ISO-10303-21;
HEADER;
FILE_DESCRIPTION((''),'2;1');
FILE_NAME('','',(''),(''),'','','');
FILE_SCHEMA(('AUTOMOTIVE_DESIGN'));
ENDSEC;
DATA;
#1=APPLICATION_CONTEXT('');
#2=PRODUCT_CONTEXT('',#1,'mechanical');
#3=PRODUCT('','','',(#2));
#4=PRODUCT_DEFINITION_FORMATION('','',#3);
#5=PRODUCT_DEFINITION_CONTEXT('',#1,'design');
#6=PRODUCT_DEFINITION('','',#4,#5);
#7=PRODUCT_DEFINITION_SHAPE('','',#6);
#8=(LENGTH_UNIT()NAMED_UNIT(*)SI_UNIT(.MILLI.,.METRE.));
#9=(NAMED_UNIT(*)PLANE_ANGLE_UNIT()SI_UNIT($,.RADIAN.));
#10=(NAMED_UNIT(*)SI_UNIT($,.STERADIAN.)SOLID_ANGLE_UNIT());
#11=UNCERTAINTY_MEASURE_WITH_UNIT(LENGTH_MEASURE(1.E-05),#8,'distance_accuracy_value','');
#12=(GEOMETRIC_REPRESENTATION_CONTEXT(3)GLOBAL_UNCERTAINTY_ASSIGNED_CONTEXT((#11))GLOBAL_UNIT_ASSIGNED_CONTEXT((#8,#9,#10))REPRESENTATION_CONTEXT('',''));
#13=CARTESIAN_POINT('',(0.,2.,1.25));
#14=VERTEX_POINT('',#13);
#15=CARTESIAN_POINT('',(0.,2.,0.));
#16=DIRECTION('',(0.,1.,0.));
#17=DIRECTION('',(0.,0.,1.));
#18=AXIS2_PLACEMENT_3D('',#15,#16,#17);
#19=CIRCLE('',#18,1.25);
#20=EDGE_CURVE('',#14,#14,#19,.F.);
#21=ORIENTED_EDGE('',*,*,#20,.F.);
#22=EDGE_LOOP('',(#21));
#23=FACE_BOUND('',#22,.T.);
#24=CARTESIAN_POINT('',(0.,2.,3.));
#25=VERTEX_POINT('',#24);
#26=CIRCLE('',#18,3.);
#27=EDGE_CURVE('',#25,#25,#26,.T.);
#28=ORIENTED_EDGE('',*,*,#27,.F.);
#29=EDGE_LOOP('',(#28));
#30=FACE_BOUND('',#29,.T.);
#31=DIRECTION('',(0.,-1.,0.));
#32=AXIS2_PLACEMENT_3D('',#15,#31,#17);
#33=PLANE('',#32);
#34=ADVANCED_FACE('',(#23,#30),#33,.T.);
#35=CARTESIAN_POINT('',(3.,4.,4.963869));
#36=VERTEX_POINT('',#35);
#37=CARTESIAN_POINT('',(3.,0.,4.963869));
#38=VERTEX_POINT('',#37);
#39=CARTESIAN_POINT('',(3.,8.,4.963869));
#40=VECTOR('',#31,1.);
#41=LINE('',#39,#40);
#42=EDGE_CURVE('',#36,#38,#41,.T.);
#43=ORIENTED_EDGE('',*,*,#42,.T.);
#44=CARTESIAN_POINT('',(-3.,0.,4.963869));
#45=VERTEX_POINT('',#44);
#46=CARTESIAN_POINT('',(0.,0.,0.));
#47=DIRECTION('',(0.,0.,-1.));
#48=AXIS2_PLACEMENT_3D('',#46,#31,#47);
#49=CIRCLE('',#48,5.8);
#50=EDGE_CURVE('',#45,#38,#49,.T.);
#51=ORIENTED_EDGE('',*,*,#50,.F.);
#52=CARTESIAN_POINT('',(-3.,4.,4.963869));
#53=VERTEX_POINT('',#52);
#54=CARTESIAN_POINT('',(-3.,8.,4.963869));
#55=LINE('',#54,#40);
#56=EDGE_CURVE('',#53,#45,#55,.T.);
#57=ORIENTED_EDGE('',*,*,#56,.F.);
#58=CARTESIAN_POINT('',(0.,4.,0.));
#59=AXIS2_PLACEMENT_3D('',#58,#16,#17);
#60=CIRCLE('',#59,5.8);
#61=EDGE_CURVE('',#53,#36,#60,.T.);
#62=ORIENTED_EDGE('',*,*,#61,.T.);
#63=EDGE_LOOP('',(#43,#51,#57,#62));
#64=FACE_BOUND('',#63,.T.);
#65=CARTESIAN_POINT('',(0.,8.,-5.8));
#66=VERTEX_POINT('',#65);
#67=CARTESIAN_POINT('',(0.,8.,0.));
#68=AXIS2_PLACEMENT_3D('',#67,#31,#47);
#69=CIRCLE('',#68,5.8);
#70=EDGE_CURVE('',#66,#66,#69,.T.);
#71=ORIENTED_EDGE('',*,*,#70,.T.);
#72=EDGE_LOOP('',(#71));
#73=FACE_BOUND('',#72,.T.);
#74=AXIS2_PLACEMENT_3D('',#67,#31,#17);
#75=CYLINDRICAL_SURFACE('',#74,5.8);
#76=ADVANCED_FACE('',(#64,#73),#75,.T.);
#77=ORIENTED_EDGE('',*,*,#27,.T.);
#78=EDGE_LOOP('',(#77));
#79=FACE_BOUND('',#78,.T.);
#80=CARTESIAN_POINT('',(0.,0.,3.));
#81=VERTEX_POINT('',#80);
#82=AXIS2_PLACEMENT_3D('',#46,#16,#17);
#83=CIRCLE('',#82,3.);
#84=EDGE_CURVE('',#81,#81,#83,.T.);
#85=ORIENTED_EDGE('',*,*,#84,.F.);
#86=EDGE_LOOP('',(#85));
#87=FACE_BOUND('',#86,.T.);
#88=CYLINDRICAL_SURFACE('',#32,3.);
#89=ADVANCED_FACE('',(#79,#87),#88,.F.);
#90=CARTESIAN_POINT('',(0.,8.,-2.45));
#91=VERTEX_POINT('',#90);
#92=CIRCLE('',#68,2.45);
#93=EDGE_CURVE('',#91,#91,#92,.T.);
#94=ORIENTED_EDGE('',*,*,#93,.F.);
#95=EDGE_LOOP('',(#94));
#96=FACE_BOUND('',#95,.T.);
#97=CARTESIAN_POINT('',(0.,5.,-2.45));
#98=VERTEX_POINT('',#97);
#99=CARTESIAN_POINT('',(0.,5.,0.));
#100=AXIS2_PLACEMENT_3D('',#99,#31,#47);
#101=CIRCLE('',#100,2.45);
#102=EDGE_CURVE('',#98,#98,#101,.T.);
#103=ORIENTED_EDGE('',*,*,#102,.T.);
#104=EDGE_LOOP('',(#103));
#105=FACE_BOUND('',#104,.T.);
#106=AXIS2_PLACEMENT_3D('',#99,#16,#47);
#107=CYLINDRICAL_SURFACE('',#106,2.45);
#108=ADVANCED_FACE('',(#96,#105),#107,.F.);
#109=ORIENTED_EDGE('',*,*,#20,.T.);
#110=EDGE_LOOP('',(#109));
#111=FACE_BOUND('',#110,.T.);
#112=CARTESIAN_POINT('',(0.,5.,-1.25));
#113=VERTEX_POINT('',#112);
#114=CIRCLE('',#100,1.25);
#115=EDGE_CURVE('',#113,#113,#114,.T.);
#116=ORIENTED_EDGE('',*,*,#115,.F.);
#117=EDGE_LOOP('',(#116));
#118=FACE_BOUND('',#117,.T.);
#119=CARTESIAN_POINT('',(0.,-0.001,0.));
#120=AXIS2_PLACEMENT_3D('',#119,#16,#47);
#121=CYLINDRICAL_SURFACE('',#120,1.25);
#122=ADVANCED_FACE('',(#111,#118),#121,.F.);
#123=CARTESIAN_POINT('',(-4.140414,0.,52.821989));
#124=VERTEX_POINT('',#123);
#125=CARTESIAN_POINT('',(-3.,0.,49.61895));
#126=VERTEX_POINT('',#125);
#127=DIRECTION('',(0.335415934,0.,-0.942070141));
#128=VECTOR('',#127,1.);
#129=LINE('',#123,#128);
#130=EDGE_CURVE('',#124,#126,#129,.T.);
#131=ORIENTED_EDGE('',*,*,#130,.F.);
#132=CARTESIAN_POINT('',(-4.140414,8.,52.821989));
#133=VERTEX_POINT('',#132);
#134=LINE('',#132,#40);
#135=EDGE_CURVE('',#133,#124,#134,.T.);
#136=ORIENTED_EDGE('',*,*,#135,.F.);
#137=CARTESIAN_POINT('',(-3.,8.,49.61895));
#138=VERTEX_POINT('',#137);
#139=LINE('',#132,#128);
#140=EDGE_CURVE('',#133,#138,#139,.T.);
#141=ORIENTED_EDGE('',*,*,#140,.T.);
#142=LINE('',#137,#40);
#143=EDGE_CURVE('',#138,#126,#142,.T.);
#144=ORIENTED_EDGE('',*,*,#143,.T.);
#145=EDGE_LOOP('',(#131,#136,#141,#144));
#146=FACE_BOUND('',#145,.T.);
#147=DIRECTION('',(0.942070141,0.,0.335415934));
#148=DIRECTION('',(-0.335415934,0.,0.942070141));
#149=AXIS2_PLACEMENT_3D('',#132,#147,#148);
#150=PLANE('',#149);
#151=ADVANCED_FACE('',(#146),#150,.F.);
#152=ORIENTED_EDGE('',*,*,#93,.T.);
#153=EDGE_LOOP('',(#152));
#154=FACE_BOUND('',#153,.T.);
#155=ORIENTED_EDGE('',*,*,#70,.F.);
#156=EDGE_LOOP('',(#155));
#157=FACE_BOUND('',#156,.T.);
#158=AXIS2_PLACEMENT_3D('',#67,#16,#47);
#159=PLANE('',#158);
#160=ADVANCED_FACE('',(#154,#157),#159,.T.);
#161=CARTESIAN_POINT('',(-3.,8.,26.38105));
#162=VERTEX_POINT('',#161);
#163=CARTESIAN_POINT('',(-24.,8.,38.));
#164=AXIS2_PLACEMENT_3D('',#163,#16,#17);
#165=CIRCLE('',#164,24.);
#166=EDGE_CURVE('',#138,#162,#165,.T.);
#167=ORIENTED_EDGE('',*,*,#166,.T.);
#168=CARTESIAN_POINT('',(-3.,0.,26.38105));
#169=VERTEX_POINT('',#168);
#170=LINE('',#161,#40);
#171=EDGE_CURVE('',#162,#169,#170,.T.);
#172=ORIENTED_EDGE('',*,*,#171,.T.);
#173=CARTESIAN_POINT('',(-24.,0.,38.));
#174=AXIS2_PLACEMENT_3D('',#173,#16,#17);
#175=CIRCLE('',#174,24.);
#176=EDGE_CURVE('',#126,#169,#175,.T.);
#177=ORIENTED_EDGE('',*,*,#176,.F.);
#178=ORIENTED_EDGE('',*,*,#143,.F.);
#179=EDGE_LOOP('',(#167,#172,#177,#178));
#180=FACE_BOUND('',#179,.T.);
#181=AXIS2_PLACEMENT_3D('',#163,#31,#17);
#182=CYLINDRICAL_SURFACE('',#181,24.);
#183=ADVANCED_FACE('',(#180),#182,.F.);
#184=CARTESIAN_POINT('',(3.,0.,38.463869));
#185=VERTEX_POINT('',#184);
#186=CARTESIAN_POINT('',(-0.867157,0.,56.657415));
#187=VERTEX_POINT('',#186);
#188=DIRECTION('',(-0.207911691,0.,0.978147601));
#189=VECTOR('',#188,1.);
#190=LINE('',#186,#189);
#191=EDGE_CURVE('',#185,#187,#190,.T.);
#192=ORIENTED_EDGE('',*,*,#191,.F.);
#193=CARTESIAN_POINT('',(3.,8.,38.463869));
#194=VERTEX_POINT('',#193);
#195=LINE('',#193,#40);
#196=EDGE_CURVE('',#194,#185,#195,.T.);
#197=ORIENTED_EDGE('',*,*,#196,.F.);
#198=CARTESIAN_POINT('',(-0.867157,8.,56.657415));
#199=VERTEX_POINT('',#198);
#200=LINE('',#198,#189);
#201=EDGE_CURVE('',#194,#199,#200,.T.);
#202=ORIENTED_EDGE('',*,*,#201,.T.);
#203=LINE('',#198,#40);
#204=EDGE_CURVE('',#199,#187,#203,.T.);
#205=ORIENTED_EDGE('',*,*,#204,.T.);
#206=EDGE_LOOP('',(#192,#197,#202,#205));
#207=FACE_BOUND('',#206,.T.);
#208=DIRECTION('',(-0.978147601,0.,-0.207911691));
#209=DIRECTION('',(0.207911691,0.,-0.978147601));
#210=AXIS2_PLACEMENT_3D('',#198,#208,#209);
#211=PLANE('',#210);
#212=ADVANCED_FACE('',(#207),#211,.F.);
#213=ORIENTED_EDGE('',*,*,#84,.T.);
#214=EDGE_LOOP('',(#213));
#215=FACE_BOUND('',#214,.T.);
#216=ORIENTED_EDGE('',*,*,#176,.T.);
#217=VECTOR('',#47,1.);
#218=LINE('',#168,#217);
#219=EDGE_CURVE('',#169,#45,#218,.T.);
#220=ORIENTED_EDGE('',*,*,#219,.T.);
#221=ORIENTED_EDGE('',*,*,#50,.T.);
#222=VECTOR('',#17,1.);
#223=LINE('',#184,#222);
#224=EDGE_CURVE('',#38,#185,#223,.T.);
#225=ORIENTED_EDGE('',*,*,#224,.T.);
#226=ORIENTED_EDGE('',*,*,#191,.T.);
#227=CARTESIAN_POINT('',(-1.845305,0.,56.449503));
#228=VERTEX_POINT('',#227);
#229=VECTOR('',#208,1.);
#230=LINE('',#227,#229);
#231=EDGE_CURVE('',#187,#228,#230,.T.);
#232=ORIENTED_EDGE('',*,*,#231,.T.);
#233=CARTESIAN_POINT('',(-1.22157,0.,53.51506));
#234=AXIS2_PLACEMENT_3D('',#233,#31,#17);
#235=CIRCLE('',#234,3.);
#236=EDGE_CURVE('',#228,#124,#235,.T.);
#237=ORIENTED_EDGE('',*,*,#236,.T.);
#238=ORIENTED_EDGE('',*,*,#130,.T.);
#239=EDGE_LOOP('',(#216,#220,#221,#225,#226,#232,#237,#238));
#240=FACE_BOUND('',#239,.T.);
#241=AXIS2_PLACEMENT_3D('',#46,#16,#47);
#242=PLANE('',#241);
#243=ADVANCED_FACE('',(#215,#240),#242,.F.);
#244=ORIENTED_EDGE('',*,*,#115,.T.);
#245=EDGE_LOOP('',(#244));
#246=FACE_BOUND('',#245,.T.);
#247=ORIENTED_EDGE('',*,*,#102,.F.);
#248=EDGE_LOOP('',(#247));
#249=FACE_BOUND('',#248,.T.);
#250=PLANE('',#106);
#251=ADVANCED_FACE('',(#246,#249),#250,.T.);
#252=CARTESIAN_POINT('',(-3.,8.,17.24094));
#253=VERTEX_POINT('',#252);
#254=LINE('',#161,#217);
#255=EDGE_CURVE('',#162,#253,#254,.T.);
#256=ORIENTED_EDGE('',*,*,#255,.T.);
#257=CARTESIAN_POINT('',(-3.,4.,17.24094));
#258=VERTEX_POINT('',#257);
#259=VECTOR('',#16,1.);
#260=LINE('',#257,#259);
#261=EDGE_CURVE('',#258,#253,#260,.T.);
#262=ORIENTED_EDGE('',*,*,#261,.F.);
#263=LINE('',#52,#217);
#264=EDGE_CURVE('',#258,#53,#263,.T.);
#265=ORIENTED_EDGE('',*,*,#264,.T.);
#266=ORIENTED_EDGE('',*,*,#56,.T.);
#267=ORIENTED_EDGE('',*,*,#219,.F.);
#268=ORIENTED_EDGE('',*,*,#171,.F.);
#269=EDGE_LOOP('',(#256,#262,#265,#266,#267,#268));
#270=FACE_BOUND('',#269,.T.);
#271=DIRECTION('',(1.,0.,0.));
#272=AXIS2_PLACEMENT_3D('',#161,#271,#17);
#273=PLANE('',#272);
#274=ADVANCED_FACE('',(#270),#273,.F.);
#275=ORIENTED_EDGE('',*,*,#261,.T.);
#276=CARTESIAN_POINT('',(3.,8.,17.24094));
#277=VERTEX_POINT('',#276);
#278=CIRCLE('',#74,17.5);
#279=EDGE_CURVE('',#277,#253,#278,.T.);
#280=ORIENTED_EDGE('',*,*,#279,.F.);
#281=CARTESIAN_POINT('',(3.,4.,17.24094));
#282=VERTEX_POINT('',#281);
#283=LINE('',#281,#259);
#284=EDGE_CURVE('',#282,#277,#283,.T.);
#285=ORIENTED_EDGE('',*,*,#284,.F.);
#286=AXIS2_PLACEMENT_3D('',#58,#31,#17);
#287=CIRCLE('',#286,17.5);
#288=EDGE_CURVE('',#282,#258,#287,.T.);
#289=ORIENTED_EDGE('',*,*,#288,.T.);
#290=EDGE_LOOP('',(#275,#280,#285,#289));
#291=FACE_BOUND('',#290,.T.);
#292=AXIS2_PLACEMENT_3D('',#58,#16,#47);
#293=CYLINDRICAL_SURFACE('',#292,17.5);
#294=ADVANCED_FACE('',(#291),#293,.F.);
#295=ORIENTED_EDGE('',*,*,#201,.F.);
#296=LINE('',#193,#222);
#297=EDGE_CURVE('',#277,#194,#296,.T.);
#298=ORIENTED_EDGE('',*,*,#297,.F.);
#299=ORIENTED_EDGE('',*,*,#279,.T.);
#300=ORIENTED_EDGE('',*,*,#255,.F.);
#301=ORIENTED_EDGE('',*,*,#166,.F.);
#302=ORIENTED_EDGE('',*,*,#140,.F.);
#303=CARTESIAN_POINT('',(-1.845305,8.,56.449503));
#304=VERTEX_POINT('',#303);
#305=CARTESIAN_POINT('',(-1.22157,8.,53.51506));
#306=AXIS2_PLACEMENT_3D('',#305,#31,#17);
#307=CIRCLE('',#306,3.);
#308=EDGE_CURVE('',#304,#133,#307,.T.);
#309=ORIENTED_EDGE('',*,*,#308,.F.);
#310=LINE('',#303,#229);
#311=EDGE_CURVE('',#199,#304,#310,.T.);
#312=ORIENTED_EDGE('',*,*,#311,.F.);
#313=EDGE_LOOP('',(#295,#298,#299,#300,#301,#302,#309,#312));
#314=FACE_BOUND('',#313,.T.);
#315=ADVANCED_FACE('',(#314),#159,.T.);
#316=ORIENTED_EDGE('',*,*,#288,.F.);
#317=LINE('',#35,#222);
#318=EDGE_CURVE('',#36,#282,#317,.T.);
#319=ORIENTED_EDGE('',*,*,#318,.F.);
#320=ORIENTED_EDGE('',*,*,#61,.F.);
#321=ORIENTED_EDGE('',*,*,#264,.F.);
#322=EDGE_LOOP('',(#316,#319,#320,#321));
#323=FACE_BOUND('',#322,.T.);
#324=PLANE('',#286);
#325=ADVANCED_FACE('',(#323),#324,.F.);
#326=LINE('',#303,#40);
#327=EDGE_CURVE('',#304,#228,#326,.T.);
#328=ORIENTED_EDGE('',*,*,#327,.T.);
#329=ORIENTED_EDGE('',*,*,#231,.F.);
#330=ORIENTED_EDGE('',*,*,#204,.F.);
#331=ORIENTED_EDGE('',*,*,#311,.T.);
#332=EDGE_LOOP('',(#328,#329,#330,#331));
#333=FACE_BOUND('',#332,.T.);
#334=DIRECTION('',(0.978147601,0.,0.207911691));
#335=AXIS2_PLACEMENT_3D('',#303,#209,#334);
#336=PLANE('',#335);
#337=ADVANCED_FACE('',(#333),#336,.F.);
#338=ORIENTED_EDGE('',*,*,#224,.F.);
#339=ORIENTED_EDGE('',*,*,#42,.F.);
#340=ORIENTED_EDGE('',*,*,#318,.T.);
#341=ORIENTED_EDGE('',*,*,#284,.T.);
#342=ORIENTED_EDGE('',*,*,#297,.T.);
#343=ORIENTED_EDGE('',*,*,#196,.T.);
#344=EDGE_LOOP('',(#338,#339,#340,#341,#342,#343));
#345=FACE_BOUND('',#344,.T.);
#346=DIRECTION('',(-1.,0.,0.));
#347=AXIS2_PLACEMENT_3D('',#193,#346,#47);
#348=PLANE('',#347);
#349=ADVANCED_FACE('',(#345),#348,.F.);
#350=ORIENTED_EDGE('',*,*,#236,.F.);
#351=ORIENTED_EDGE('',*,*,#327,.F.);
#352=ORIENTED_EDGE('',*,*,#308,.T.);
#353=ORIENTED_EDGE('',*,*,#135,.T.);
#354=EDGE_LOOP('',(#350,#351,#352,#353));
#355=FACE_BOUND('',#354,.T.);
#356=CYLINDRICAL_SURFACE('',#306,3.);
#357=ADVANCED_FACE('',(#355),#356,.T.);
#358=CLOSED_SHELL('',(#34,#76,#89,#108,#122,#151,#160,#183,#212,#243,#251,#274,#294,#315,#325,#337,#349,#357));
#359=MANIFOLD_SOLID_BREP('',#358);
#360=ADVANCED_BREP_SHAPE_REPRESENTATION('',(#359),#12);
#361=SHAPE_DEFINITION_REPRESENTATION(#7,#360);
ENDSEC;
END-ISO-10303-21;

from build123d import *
from build123d.topology import SkipClean

# Parameters (mm, degrees)
BOSS_EXTRU_1_DEPTH             = 8
ESQUISSE2_R                    = 2.45
ENL_V_MAT_EXTRU_1_DEPTH        = 3
ENL_V_MAT_EXTRU_2_REACH        = 59.173
ESQUISSE3_R                    = 1.25
ESQUISSE4_R                    = 3
ENL_V_MAT_EXTRU_3_DEPTH        = 2
ENL_V_START                    = -4
ENL_V_MAT_EXTRU_4_DEPTH        = 4
CORPS_D_PLACER_COPIER1_DEPTH   = 8
CORPS_D_PLACER_COPIER1_2_DEPTH = 8
CORPS_D_PLACER_COPIER1_3_DEPTH = 4


# Read off the part's stored shape, not the designer's step: Corps-Déplacer/Copier1
with BuildPart() as part:
    # Esquisse1 → Boss.-Extru.1 (new body)
    with BuildSketch(Plane(origin=(0, 0, 0), x_dir=(1, 0, 0), z_dir=(0, 1, 0))):
        with BuildLine():
            Line((-3, 26.381049961), (-3, 4.963869458))
            ThreePointArc((-3, 4.963869458), (0, -5.8), (3, 4.963869458))
            Line((3, 4.963869458), (3, 38.463869458))
            Line((3, 38.463869458), (-0.867157449, 56.657414832))
            Line((-0.867157449, 56.657414832), (-1.84530505, 56.449503141))
            ThreePointArc((-1.84530505, 56.449503141), (-3.756758837, 55.119060789), (-4.140414176, 52.821988519))
            Line((-4.140414176, 52.821988519), (-3, 49.618950039))
            ThreePointArc((-3, 49.618950039), (0, 38), (-3, 26.381049961))
        make_face()
    extrude(amount=BOSS_EXTRU_1_DEPTH)

    # Esquisse2 → Enlèv. mat.-Extru.1 (cut)
    with BuildSketch(Plane(origin=(0, 8, 0), x_dir=(1, 0, 0), z_dir=(0, 1, 0))):
        with Locations(Location((0, 0, 0), (0, 0, 270))):
            Circle(ESQUISSE2_R)
    extrude(amount=-ENL_V_MAT_EXTRU_1_DEPTH, mode=Mode.SUBTRACT)

    # Esquisse3 → Enlèv. mat.-Extru.2 (cut, up to next)
    with BuildSketch(Plane(origin=(0, 5, 0), x_dir=(1, 0, 0), z_dir=(0, 1, 0)), mode=Mode.PRIVATE) as enl_v_mat_extru_2_sk1:
        with Locations(Location((0, 0, 0), (0, 0, 270))):
            Circle(ESQUISSE3_R)
    enl_v_mat_extru_2_tool1 = extrude(enl_v_mat_extru_2_sk1.sketch, amount=-ENL_V_MAT_EXTRU_2_REACH, mode=Mode.PRIVATE) & part.part
    add(enl_v_mat_extru_2_tool1.solids().sort_by_distance((0, 5, 0))[0], mode=Mode.SUBTRACT)

    # Esquisse4 → Enlèv. mat.-Extru.3 (cut)
    with BuildSketch(Plane.XZ):
        with Locations(Location((0, 0, 0), (0, 0, 270))):
            Circle(ESQUISSE4_R)
    extrude(amount=-ENL_V_MAT_EXTRU_3_DEPTH, mode=Mode.SUBTRACT)

    # Esquisse5 → Enlèv. mat.-Extru.4 (cut)
    with BuildSketch(Plane(origin=(0, 8, 0), x_dir=(1, 0, 0), z_dir=(0, 1, 0)).offset(ENL_V_START)):
        with BuildLine():
            Line((-3, 4.963869458), (-3, 17.24093965))
            ThreePointArc((-3, 17.24093965), (0, 17.5), (3, 17.24093965))
            Line((3, 17.24093965), (3, 4.963869458))
            ThreePointArc((3, 4.963869458), (0, 5.8), (-3, 4.963869458))
        make_face()
    extrude(amount=ENL_V_MAT_EXTRU_4_DEPTH, mode=Mode.SUBTRACT)

    # Corps-Déplacer/Copier1 outline → Corps-Déplacer/Copier1 (cut)
    with SkipClean():  # the faces are left unmerged after this step: merging them gives an invalid solid
        with BuildSketch(Plane(origin=(0, 0, 0), x_dir=(1, 0, 0), z_dir=(0, 1, 0))):
            with BuildLine():
                ThreePointArc((-3, 4.963869458), (0, 5.8), (3, 4.963869458))
                Line((3, 4.963869458), (3, 38.463869458))
                Line((3, 38.463869458), (-0.867157449, 56.657414832))
                Line((-0.867157449, 56.657414832), (-1.84530505, 56.449503141))
                ThreePointArc((-1.84530505, 56.449503141), (-3.756758837, 55.119060789), (-4.140414176, 52.821988519))
                Line((-4.140414176, 52.821988519), (-3, 49.618950039))
                ThreePointArc((-3, 49.618950039), (0, 38), (-3, 26.381049961))
                Line((-3, 26.381049961), (-3, 4.963869458))
            make_face()
        extrude(amount=CORPS_D_PLACER_COPIER1_DEPTH, mode=Mode.SUBTRACT)



with BuildPart() as body_2:
    # Corps-D_placer_Copier1 2 outline → Corps-D_placer_Copier1 2 (new body)
    with BuildSketch(Plane(origin=(0, 0, 0), x_dir=(1, 0, 0), z_dir=(0, 1, 0))):
        with BuildLine():
            Line((3, -38.463869458), (3, -17.24093965))
            ThreePointArc((3, -17.24093965), (0, -17.5), (-3, -17.24093965))
            Line((-3, -17.24093965), (-3, -26.381049961))
            ThreePointArc((-3, -26.381049961), (0, -38), (-3, -49.618950039))
            Line((-3, -49.618950039), (-4.140414176, -52.821988519))
            ThreePointArc((-4.140414176, -52.821988519), (-3.756758837, -55.119060789), (-1.84530505, -56.449503141))
            Line((-1.84530505, -56.449503141), (-0.867157449, -56.657414832))
            Line((-0.867157449, -56.657414832), (3, -38.463869458))
        make_face()
    extrude(amount=CORPS_D_PLACER_COPIER1_2_DEPTH)


with BuildPart() as part_1:
    with SkipClean():  # the faces are left unmerged after this step: merging them gives an invalid solid
        add(part.part)

        add(body_2.part)  # Corps-D_placer_Copier1 3 merges body 2
        # Corps-D_placer_Copier1 3 outline → Corps-D_placer_Copier1 3 (add)
        with BuildSketch(Plane(origin=(0, 0, 0), x_dir=(1, 0, 0), z_dir=(0, 1, 0))):
            with BuildLine():
                Line((3, -17.24093965), (3, -4.963869458))
                ThreePointArc((3, -4.963869458), (0, -5.8), (-3, -4.963869458))
                Line((-3, -4.963869458), (-3, -17.24093965))
                ThreePointArc((-3, -17.24093965), (0, -17.5), (3, -17.24093965))
            make_face()
        extrude(amount=CORPS_D_PLACER_COPIER1_3_DEPTH)


solid = part_1.part
